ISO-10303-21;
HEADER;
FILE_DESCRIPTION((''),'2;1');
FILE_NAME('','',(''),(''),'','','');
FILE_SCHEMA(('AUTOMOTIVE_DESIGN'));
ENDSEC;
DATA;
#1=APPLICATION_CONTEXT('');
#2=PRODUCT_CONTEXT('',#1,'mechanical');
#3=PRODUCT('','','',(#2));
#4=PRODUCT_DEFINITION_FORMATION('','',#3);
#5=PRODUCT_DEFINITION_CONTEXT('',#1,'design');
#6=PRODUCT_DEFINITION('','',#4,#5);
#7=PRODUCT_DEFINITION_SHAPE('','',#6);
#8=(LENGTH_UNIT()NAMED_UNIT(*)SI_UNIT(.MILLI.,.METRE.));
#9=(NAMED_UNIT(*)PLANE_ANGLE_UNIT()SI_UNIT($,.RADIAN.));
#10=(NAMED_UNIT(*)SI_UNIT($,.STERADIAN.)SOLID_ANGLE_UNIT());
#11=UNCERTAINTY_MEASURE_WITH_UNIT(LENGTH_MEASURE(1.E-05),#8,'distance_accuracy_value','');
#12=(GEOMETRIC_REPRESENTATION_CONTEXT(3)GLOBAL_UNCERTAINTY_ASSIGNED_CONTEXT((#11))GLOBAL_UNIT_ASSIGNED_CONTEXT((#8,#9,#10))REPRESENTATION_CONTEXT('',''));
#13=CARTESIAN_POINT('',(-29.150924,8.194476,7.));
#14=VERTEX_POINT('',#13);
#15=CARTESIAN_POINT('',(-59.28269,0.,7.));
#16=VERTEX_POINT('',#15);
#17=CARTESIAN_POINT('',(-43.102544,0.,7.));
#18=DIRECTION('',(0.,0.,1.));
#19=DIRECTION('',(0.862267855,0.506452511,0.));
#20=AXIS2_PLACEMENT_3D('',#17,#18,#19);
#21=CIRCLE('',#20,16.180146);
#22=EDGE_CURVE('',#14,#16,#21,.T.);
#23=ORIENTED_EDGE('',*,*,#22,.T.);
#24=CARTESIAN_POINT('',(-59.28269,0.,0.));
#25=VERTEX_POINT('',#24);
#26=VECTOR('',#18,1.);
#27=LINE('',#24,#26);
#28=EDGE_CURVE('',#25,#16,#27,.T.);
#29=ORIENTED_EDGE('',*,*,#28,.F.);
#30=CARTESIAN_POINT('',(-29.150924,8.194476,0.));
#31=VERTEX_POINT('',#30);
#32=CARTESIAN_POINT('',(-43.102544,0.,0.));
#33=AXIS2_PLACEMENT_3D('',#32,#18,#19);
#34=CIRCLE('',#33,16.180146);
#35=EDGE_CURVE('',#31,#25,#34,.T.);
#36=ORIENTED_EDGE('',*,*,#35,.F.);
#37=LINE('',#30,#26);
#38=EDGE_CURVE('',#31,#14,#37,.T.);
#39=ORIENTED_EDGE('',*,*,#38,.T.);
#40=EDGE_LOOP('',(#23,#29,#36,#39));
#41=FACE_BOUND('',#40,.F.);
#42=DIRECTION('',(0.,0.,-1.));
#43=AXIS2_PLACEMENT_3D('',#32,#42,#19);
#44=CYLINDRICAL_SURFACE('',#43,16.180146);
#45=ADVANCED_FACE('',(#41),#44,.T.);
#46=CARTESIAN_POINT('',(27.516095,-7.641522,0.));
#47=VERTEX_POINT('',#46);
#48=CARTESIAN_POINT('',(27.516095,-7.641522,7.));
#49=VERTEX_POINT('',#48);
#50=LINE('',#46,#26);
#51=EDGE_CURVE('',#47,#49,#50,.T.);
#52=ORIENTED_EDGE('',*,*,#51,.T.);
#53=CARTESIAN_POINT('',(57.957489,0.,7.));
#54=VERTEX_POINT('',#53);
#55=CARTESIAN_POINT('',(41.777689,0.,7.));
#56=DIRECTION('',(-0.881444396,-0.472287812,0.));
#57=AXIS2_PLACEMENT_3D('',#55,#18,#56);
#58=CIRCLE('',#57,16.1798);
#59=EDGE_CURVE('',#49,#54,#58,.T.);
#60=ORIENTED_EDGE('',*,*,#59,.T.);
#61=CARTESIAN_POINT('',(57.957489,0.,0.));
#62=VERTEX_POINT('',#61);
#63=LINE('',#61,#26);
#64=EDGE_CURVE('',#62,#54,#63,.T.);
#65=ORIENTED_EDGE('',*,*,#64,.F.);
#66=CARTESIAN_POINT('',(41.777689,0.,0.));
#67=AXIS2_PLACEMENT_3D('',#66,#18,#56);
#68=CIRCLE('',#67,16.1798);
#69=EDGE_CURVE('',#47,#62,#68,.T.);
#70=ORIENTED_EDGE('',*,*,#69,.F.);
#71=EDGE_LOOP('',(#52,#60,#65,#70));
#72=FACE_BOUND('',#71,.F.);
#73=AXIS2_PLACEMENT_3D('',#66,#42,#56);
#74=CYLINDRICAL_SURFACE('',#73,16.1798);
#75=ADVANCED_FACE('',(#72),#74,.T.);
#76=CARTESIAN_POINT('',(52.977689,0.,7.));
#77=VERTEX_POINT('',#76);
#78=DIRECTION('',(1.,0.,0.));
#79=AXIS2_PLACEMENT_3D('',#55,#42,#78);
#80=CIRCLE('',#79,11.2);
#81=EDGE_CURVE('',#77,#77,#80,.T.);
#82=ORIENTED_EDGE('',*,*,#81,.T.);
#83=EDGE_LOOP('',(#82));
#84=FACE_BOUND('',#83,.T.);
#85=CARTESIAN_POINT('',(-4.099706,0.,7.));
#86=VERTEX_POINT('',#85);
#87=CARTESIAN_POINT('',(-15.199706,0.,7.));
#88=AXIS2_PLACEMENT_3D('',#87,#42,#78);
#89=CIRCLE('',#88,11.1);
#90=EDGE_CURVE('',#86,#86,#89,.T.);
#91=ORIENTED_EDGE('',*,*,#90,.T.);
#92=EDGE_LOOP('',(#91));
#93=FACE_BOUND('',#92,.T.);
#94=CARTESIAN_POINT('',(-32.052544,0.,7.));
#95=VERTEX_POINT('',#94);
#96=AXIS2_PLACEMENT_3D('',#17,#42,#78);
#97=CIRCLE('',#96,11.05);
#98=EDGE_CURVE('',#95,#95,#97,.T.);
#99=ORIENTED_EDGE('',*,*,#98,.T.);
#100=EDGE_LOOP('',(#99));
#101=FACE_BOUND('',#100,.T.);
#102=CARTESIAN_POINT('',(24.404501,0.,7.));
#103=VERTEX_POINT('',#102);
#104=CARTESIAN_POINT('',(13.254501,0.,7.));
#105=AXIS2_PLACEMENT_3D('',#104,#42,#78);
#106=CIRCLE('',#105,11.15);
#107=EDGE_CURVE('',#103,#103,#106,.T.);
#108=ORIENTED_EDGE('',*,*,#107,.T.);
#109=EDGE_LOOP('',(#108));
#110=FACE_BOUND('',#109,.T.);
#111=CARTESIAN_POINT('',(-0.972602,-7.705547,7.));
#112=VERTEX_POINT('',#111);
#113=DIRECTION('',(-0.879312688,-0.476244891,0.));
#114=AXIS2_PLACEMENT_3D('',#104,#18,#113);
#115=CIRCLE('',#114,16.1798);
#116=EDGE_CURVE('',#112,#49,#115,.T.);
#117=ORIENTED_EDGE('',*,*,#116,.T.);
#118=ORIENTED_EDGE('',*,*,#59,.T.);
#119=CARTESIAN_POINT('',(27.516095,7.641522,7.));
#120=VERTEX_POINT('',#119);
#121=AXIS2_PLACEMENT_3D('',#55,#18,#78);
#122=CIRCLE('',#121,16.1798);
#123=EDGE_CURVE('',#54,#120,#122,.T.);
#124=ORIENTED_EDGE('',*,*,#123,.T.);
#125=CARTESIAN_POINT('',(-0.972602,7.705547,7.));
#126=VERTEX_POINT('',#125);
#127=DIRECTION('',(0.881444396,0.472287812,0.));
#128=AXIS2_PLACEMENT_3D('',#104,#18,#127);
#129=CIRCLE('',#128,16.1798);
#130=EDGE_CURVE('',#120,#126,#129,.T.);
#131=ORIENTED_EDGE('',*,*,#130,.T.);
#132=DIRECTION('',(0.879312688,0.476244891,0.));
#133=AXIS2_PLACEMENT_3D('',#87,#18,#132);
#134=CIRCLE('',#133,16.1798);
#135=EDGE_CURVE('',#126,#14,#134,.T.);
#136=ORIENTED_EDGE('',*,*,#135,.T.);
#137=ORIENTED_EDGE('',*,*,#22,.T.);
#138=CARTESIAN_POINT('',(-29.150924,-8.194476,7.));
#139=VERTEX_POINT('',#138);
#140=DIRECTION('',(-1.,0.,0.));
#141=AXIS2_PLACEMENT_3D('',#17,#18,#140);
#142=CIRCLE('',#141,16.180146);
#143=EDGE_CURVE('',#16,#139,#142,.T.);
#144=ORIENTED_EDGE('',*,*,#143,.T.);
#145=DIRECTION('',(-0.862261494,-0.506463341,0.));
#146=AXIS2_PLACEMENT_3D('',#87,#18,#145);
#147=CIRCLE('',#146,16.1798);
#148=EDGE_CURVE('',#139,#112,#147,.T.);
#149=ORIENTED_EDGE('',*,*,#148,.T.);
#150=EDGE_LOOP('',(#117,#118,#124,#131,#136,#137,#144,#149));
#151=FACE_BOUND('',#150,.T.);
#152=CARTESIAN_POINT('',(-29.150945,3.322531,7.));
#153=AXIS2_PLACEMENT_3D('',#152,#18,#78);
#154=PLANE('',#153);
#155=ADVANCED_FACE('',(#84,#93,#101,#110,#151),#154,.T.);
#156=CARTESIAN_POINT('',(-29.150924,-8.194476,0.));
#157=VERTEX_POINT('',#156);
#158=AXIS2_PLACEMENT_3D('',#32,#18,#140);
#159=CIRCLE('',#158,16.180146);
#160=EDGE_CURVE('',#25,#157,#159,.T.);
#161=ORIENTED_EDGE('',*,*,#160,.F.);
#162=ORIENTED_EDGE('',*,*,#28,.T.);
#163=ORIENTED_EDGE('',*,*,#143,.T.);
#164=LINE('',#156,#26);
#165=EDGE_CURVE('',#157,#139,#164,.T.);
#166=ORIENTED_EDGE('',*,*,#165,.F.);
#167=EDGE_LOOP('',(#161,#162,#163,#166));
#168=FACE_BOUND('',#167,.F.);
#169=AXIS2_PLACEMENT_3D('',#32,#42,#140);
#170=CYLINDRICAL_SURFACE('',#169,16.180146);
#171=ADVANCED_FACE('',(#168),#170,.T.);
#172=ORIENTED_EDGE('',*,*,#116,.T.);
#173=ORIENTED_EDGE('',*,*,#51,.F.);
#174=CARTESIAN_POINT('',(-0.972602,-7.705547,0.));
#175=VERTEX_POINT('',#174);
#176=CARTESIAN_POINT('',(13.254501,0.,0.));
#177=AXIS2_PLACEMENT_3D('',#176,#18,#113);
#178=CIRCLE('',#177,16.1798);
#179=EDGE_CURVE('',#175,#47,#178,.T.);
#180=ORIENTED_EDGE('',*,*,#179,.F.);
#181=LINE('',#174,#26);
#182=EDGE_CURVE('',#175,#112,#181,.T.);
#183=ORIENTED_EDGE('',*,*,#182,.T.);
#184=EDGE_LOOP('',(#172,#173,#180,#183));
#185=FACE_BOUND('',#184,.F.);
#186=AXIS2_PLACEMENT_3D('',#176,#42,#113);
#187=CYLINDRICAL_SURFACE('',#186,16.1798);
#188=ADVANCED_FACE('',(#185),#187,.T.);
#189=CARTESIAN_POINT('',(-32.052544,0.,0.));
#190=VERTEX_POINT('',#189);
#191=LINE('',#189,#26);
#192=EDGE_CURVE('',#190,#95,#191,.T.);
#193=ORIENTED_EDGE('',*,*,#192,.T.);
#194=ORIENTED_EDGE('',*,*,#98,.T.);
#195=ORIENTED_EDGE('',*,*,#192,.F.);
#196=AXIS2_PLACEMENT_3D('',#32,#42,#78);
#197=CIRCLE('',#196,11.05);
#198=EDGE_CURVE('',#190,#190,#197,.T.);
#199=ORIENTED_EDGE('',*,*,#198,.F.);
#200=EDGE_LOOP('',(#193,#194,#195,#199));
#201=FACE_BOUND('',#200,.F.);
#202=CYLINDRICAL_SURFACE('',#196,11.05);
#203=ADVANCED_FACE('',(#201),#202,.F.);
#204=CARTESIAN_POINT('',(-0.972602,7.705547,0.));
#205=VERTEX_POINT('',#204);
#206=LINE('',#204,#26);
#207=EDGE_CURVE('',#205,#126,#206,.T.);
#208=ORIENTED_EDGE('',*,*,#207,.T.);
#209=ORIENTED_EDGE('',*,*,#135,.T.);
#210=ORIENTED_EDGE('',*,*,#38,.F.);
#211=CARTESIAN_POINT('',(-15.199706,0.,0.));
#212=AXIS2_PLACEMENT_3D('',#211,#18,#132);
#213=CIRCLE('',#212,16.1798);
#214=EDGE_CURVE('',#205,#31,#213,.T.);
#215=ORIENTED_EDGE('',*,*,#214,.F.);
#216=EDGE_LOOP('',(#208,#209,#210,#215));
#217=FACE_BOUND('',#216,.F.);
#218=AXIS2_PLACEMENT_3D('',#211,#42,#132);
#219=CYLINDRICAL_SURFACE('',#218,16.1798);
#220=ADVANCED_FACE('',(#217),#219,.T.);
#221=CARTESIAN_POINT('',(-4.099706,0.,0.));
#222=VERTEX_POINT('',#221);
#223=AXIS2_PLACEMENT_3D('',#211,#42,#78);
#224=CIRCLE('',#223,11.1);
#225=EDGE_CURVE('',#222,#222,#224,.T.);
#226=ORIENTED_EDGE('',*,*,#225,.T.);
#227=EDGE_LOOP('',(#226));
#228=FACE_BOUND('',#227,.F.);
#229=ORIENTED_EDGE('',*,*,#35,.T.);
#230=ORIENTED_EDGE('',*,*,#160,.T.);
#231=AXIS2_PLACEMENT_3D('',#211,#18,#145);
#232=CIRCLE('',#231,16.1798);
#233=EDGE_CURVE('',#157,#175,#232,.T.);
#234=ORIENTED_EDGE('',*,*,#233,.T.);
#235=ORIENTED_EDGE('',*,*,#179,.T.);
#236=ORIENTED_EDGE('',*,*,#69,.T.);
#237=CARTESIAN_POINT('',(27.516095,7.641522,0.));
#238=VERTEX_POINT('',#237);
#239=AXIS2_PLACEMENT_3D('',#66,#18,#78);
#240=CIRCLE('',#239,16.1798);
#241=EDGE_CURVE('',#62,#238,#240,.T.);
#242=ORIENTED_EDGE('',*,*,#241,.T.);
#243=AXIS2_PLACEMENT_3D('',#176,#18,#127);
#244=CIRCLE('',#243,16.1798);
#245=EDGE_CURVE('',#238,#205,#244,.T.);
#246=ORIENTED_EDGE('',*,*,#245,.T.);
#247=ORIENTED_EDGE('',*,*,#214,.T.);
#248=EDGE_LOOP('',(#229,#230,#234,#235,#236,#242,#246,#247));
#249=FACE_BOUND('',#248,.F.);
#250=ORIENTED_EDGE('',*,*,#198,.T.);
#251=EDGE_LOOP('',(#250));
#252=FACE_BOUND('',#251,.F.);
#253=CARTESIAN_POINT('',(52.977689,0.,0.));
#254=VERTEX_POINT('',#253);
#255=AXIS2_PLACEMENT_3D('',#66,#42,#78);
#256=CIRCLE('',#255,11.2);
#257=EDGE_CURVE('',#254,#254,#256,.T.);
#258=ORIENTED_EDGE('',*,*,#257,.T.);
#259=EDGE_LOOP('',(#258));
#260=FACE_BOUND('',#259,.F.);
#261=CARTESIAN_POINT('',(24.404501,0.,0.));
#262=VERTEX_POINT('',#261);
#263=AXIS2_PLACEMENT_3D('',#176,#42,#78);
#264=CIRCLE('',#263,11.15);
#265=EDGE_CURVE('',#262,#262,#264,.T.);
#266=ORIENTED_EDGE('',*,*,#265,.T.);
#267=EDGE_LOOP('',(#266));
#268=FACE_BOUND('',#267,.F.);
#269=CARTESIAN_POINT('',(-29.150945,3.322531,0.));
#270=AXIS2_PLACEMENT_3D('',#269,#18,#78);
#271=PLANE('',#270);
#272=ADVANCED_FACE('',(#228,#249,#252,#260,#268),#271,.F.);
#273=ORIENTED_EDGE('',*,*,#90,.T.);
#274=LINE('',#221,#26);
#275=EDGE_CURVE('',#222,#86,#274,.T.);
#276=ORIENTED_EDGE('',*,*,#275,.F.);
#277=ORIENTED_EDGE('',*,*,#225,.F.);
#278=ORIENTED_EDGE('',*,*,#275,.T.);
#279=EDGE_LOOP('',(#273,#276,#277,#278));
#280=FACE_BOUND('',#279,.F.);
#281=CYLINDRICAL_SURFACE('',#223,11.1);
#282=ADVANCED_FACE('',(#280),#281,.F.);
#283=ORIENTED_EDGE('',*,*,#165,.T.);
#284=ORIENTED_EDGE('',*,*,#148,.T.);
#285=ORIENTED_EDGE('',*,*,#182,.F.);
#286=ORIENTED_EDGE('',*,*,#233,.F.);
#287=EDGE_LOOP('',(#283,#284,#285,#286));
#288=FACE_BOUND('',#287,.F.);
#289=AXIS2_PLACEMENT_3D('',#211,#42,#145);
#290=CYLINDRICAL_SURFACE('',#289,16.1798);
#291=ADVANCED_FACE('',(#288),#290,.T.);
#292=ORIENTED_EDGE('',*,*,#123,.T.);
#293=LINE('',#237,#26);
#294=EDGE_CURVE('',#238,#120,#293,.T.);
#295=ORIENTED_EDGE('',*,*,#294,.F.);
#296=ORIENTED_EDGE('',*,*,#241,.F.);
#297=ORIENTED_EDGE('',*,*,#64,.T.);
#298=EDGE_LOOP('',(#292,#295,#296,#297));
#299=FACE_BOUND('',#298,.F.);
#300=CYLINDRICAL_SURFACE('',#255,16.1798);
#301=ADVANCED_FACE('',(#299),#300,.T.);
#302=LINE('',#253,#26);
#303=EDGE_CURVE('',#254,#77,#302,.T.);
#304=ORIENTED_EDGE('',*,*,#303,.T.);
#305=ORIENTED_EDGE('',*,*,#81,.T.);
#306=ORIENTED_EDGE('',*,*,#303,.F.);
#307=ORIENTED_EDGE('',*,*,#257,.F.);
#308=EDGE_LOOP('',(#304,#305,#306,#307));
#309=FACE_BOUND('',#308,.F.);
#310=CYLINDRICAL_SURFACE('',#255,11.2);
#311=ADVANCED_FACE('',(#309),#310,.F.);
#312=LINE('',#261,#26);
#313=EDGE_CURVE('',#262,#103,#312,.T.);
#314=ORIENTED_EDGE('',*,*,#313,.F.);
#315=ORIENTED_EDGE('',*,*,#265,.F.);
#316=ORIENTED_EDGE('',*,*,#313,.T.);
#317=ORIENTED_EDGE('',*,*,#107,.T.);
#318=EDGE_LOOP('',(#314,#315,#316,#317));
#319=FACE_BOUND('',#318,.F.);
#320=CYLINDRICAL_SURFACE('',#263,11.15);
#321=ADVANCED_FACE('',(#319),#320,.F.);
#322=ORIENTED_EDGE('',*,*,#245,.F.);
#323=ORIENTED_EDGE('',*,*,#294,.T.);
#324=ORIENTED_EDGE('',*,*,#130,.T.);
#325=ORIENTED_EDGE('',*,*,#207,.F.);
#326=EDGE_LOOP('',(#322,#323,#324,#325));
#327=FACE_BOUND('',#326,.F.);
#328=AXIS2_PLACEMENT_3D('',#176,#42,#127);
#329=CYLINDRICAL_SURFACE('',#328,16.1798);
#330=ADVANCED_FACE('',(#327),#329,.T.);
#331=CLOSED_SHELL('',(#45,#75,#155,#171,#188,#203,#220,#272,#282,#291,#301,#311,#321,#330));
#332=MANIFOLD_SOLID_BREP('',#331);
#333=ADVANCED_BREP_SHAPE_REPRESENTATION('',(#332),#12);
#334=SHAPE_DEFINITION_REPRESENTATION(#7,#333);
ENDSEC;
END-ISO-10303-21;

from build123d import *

# Parameters (mm, degrees)
F1_DEPTH = 7


with BuildPart() as f1:
    # F0 (on Top) → F1 (new body)
    with BuildSketch(Plane.XY):
        with BuildLine():
            Line((-31.3795059258, 0), (-26.922398242, 0))
            ThreePointArc((-26.922398242, 0), (-27.4894668745, 4.2460498939), (-29.1509244493, 8.1944755629))
            ThreePointArc((-29.1509244493, 8.1944755629), (-30.8124227539, 4.246057146), (-31.3795059258, 0))
        make_face()
        with BuildLine():
            Line((-26.2997059258, 0), (-26.922398242, 0))
            ThreePointArc((-26.922398242, 0), (-27.4894668745, -4.2460498939), (-29.1509244493, -8.1944755629))
            ThreePointArc((-29.1509244493, -8.1944755629), (-14.9190087878, -16.1773649633), (-0.9726024938, -7.7055470911))
            ThreePointArc((-0.9726024938, -7.7055470911), (-2.4295294135, -3.9745590906), (-2.9252990617, 0))
            Line((-2.9252990617, 0), (-4.0997059258, 0))
            ThreePointArc((-4.0997059258, 0), (-15.1997059258, -11.1), (-26.2997059258, 0))
        make_face()
        with BuildLine():
            ThreePointArc((-29.1509244493, 8.1944755629), (-27.4894668745, 4.2460498939), (-26.922398242, 0))
            Line((-26.922398242, 0), (-26.2997059258, 0))
            ThreePointArc((-26.2997059258, 0), (-15.1997059258, 11.1), (-4.0997059258, 0))
            Line((-4.0997059258, 0), (-2.9252990617, 0))
            ThreePointArc((-2.9252990617, 0), (-2.4295294135, 3.9745590906), (-0.9726024938, 7.7055470911))
            ThreePointArc((-0.9726024938, 7.7055470911), (-14.9190087878, 16.1773649633), (-29.1509244493, 8.1944755629))
        make_face()
        with BuildLine():
            ThreePointArc((-29.1509244493, -8.1944755629), (-27.4894668745, -4.2460498939), (-26.922398242, 0))
            Line((-26.922398242, 0), (-31.3795059258, 0))
            ThreePointArc((-31.3795059258, 0), (-30.8124227539, -4.246057146), (-29.1509244493, -8.1944755629))
        make_face()
        with BuildLine():
            ThreePointArc((-31.3795059258, 0), (-30.8124227539, 4.246057146), (-29.1509244493, 8.1944755629))
            ThreePointArc((-29.1509244493, 8.1944755629), (-47.3485941376, 15.6130773691), (-59.2826902453, 0))
            Line((-59.2826902453, 0), (-54.1525442436, 0))
            ThreePointArc((-54.1525442436, 0), (-43.1025442436, 11.05), (-32.0525442436, 0))
            Line((-32.0525442436, 0), (-31.3795059258, 0))
        make_face()
        with BuildLine():
            ThreePointArc((-59.2826902453, 0), (-47.3485941376, -15.6130773691), (-29.1509244493, -8.1944755629))
            ThreePointArc((-29.1509244493, -8.1944755629), (-30.8124227539, -4.246057146), (-31.3795059258, 0))
            Line((-31.3795059258, 0), (-32.0525442436, 0))
            ThreePointArc((-32.0525442436, 0), (-43.1025442436, -11.05), (-54.1525442436, 0))
            Line((-54.1525442436, 0), (-59.2826902453, 0))
        make_face()
        with BuildLine():
            ThreePointArc((27.5160949741, 7.6415223351), (13.2908629072, 16.1797591406), (-0.9726024938, 7.7055470911))
            ThreePointArc((-0.9726024938, 7.7055470911), (0.4843244259, 3.9745590906), (0.9800940742, 0))
            Line((0.9800940742, 0), (2.1045009383, 0))
            ThreePointArc((2.1045009383, 0), (13.2545009383, 11.15), (24.4045009383, 0))
            Line((24.4045009383, 0), (25.5978890099, 0))
            ThreePointArc((25.5978890099, 0), (26.0847659676, 3.9393012616), (27.5160949741, 7.6415223351))
        make_face()
        with BuildLine():
            ThreePointArc((0.9800940742, 0), (0.4843244259, 3.9745590906), (-0.9726024938, 7.7055470911))
            ThreePointArc((-0.9726024938, 7.7055470911), (-2.4295294135, 3.9745590906), (-2.9252990617, 0))
            Line((-2.9252990617, 0), (0, 0))
            Line((0, 0), (0.9800940742, 0))
        make_face()
        with BuildLine():
            ThreePointArc((-2.9252990617, 0), (-2.4295294135, -3.9745590906), (-0.9726024938, -7.7055470911))
            ThreePointArc((-0.9726024938, -7.7055470911), (0.4843244259, -3.9745590906), (0.9800940742, 0))
            Line((0.9800940742, 0), (0, 0))
            Line((0, 0), (-2.9252990617, 0))
        make_face()
        with BuildLine():
            ThreePointArc((0.9800940742, 0), (0.4843244259, -3.9745590906), (-0.9726024938, -7.7055470911))
            ThreePointArc((-0.9726024938, -7.7055470911), (13.2908629072, -16.1797591406), (27.5160949741, -7.6415223351))
            ThreePointArc((27.5160949741, -7.6415223351), (26.0847659676, -3.9393012616), (25.5978890099, 0))
            Line((25.5978890099, 0), (24.4045009383, 0))
            ThreePointArc((24.4045009383, 0), (13.2545009383, -11.15), (2.1045009383, 0))
            Line((2.1045009383, 0), (0.9800940742, 0))
        make_face()
        with BuildLine():
            ThreePointArc((57.9574890099, 0), (45.7169902715, 15.6929230423), (27.5160949741, 7.6415223351))
            ThreePointArc((27.5160949741, 7.6415223351), (28.9474239806, 3.9393012616), (29.4343009383, 0))
            Line((29.4343009383, 0), (30.5776890099, 0))
            ThreePointArc((30.5776890099, 0), (41.7776890099, 11.2), (52.9776890099, 0))
            Line((52.9776890099, 0), (57.9574890099, 0))
        make_face()
        with BuildLine():
            ThreePointArc((29.4343009383, 0), (28.9474239806, 3.9393012616), (27.5160949741, 7.6415223351))
            ThreePointArc((27.5160949741, 7.6415223351), (26.0847659676, 3.9393012616), (25.5978890099, 0))
            Line((25.5978890099, 0), (29.4343009383, 0))
        make_face()
        with BuildLine():
            ThreePointArc((25.5978890099, 0), (26.0847659676, -3.9393012616), (27.5160949741, -7.6415223351))
            ThreePointArc((27.5160949741, -7.6415223351), (28.9474239806, -3.9393012616), (29.4343009383, 0))
            Line((29.4343009383, 0), (25.5978890099, 0))
        make_face()
        with BuildLine():
            ThreePointArc((29.4343009383, 0), (28.9474239806, -3.9393012616), (27.5160949741, -7.6415223351))
            ThreePointArc((27.5160949741, -7.6415223351), (45.7169902715, -15.6929230423), (57.9574890099, 0))
            Line((57.9574890099, 0), (52.9776890099, 0))
            ThreePointArc((52.9776890099, 0), (41.7776890099, -11.2), (30.5776890099, 0))
            Line((30.5776890099, 0), (29.4343009383, 0))
        make_face()
    extrude(amount=F1_DEPTH)


solid = f1.part
